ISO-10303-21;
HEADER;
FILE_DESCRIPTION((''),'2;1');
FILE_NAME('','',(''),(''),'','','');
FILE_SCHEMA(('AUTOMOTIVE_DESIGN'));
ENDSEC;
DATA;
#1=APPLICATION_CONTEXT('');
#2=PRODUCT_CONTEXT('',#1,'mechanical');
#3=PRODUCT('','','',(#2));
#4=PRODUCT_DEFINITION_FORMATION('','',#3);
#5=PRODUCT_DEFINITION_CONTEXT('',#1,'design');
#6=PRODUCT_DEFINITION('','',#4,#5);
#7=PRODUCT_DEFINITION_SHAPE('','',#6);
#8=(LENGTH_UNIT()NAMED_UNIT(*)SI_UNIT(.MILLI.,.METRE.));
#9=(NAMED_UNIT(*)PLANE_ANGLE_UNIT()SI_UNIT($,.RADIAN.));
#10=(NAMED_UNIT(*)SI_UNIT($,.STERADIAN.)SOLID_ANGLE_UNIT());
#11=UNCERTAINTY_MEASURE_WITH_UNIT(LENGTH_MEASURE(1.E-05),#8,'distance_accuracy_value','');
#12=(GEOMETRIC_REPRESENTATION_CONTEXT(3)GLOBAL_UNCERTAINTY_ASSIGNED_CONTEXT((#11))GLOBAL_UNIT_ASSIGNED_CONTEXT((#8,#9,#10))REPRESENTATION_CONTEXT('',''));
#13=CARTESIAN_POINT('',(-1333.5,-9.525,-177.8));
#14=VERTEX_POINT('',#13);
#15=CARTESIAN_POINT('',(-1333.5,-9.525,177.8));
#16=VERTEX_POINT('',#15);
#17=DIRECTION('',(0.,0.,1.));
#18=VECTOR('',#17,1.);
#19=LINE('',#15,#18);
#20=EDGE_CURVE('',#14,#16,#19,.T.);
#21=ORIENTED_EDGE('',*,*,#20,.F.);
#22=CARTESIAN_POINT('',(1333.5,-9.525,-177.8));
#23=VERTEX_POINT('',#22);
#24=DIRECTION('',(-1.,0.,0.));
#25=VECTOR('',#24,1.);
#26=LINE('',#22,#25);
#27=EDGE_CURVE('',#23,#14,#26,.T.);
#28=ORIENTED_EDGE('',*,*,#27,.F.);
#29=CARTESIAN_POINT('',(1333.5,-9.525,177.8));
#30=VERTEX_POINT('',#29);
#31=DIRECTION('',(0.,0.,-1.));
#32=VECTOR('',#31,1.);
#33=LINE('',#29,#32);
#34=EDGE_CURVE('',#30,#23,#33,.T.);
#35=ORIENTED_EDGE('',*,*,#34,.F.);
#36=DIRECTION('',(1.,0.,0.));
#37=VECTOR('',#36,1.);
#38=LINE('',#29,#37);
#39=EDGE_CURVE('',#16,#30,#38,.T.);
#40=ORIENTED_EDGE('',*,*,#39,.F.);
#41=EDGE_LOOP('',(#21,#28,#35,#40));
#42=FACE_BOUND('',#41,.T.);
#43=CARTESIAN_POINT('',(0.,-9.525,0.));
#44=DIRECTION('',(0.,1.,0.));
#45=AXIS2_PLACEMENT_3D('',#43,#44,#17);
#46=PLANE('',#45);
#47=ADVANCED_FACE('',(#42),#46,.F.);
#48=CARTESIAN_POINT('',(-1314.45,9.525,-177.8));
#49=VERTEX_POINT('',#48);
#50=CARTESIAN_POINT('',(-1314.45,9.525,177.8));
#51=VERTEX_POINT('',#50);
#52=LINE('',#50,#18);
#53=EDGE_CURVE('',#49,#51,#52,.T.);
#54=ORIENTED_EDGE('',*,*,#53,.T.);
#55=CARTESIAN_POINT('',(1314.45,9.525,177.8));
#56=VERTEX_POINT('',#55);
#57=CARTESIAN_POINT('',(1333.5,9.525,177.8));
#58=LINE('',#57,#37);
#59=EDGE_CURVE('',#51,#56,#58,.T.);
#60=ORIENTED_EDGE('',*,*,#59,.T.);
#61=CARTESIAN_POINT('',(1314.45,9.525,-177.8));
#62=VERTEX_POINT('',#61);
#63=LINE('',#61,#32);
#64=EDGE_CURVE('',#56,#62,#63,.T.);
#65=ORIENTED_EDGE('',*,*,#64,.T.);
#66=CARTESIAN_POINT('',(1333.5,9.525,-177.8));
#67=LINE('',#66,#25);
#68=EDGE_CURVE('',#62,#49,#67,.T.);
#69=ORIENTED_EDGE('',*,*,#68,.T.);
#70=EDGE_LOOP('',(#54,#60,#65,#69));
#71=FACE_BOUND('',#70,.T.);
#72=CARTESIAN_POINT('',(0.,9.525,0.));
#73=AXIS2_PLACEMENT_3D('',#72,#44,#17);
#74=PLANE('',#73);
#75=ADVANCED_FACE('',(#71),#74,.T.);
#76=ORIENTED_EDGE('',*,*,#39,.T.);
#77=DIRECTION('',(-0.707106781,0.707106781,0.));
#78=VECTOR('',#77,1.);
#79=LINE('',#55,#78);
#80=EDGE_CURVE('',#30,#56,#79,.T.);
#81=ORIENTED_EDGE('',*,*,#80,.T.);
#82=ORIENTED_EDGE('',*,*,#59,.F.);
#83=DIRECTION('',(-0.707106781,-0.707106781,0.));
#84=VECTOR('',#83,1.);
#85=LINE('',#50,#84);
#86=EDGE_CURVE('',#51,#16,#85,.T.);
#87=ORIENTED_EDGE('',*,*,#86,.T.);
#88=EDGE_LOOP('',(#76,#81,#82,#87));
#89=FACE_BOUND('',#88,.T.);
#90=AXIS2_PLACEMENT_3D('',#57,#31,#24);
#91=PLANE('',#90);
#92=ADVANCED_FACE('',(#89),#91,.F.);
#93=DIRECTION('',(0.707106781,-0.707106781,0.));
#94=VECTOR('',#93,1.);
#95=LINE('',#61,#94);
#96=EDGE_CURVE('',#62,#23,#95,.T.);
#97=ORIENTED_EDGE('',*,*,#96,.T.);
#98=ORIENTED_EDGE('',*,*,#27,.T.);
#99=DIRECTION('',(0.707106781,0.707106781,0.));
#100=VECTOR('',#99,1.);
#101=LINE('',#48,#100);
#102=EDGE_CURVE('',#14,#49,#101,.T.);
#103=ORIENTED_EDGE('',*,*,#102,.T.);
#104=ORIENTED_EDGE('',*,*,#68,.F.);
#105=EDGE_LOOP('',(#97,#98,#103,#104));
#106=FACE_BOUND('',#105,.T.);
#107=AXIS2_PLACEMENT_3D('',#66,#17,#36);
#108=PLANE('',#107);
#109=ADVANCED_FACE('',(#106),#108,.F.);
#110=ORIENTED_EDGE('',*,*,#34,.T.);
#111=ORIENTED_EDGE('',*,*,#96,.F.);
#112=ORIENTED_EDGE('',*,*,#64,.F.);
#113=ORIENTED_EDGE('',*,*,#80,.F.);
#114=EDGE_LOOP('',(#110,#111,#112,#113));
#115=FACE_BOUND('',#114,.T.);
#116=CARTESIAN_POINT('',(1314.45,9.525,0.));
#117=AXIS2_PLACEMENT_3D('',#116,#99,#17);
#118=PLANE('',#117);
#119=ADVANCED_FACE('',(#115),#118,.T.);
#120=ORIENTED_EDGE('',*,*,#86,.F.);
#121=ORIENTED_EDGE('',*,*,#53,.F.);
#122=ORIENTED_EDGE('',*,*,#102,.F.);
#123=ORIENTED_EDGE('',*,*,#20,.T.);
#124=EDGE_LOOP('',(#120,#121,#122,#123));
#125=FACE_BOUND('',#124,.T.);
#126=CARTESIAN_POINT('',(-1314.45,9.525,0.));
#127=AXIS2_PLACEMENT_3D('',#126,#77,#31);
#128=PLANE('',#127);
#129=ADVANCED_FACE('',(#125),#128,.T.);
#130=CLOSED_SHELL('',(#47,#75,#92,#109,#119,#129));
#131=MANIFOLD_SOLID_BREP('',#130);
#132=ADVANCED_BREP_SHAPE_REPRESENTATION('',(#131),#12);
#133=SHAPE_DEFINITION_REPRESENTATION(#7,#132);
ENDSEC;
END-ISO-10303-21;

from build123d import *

# Parameters (mm, degrees)
SKETCH1_W           = 2667
SKETCH1_H           = 355.6
BOSS_EXTRUDE1_DEPTH = 9.525
CHAMFER1_SIZE       = 19.05


with BuildPart() as part:
    # Sketch1 → Boss-Extrude1 (new, symmetric)
    with BuildSketch(Plane(origin=(0, 0, 0), x_dir=(1, 0, 0), z_dir=(0, 1, 0))):
        Rectangle(SKETCH1_W, SKETCH1_H)
    extrude(amount=BOSS_EXTRUDE1_DEPTH, both=True)

    # Chamfer1
    chamfer1_edges = [part.edges().sort_by_distance(p)[0] for p in [
        (1333.5, 9.525, 0),
        (-1333.5, 9.525, 0),
    ]]
    chamfer(chamfer1_edges, length=CHAMFER1_SIZE - 0.0001)  # a hair under: the kernel refuses the full size


solid = part.part
